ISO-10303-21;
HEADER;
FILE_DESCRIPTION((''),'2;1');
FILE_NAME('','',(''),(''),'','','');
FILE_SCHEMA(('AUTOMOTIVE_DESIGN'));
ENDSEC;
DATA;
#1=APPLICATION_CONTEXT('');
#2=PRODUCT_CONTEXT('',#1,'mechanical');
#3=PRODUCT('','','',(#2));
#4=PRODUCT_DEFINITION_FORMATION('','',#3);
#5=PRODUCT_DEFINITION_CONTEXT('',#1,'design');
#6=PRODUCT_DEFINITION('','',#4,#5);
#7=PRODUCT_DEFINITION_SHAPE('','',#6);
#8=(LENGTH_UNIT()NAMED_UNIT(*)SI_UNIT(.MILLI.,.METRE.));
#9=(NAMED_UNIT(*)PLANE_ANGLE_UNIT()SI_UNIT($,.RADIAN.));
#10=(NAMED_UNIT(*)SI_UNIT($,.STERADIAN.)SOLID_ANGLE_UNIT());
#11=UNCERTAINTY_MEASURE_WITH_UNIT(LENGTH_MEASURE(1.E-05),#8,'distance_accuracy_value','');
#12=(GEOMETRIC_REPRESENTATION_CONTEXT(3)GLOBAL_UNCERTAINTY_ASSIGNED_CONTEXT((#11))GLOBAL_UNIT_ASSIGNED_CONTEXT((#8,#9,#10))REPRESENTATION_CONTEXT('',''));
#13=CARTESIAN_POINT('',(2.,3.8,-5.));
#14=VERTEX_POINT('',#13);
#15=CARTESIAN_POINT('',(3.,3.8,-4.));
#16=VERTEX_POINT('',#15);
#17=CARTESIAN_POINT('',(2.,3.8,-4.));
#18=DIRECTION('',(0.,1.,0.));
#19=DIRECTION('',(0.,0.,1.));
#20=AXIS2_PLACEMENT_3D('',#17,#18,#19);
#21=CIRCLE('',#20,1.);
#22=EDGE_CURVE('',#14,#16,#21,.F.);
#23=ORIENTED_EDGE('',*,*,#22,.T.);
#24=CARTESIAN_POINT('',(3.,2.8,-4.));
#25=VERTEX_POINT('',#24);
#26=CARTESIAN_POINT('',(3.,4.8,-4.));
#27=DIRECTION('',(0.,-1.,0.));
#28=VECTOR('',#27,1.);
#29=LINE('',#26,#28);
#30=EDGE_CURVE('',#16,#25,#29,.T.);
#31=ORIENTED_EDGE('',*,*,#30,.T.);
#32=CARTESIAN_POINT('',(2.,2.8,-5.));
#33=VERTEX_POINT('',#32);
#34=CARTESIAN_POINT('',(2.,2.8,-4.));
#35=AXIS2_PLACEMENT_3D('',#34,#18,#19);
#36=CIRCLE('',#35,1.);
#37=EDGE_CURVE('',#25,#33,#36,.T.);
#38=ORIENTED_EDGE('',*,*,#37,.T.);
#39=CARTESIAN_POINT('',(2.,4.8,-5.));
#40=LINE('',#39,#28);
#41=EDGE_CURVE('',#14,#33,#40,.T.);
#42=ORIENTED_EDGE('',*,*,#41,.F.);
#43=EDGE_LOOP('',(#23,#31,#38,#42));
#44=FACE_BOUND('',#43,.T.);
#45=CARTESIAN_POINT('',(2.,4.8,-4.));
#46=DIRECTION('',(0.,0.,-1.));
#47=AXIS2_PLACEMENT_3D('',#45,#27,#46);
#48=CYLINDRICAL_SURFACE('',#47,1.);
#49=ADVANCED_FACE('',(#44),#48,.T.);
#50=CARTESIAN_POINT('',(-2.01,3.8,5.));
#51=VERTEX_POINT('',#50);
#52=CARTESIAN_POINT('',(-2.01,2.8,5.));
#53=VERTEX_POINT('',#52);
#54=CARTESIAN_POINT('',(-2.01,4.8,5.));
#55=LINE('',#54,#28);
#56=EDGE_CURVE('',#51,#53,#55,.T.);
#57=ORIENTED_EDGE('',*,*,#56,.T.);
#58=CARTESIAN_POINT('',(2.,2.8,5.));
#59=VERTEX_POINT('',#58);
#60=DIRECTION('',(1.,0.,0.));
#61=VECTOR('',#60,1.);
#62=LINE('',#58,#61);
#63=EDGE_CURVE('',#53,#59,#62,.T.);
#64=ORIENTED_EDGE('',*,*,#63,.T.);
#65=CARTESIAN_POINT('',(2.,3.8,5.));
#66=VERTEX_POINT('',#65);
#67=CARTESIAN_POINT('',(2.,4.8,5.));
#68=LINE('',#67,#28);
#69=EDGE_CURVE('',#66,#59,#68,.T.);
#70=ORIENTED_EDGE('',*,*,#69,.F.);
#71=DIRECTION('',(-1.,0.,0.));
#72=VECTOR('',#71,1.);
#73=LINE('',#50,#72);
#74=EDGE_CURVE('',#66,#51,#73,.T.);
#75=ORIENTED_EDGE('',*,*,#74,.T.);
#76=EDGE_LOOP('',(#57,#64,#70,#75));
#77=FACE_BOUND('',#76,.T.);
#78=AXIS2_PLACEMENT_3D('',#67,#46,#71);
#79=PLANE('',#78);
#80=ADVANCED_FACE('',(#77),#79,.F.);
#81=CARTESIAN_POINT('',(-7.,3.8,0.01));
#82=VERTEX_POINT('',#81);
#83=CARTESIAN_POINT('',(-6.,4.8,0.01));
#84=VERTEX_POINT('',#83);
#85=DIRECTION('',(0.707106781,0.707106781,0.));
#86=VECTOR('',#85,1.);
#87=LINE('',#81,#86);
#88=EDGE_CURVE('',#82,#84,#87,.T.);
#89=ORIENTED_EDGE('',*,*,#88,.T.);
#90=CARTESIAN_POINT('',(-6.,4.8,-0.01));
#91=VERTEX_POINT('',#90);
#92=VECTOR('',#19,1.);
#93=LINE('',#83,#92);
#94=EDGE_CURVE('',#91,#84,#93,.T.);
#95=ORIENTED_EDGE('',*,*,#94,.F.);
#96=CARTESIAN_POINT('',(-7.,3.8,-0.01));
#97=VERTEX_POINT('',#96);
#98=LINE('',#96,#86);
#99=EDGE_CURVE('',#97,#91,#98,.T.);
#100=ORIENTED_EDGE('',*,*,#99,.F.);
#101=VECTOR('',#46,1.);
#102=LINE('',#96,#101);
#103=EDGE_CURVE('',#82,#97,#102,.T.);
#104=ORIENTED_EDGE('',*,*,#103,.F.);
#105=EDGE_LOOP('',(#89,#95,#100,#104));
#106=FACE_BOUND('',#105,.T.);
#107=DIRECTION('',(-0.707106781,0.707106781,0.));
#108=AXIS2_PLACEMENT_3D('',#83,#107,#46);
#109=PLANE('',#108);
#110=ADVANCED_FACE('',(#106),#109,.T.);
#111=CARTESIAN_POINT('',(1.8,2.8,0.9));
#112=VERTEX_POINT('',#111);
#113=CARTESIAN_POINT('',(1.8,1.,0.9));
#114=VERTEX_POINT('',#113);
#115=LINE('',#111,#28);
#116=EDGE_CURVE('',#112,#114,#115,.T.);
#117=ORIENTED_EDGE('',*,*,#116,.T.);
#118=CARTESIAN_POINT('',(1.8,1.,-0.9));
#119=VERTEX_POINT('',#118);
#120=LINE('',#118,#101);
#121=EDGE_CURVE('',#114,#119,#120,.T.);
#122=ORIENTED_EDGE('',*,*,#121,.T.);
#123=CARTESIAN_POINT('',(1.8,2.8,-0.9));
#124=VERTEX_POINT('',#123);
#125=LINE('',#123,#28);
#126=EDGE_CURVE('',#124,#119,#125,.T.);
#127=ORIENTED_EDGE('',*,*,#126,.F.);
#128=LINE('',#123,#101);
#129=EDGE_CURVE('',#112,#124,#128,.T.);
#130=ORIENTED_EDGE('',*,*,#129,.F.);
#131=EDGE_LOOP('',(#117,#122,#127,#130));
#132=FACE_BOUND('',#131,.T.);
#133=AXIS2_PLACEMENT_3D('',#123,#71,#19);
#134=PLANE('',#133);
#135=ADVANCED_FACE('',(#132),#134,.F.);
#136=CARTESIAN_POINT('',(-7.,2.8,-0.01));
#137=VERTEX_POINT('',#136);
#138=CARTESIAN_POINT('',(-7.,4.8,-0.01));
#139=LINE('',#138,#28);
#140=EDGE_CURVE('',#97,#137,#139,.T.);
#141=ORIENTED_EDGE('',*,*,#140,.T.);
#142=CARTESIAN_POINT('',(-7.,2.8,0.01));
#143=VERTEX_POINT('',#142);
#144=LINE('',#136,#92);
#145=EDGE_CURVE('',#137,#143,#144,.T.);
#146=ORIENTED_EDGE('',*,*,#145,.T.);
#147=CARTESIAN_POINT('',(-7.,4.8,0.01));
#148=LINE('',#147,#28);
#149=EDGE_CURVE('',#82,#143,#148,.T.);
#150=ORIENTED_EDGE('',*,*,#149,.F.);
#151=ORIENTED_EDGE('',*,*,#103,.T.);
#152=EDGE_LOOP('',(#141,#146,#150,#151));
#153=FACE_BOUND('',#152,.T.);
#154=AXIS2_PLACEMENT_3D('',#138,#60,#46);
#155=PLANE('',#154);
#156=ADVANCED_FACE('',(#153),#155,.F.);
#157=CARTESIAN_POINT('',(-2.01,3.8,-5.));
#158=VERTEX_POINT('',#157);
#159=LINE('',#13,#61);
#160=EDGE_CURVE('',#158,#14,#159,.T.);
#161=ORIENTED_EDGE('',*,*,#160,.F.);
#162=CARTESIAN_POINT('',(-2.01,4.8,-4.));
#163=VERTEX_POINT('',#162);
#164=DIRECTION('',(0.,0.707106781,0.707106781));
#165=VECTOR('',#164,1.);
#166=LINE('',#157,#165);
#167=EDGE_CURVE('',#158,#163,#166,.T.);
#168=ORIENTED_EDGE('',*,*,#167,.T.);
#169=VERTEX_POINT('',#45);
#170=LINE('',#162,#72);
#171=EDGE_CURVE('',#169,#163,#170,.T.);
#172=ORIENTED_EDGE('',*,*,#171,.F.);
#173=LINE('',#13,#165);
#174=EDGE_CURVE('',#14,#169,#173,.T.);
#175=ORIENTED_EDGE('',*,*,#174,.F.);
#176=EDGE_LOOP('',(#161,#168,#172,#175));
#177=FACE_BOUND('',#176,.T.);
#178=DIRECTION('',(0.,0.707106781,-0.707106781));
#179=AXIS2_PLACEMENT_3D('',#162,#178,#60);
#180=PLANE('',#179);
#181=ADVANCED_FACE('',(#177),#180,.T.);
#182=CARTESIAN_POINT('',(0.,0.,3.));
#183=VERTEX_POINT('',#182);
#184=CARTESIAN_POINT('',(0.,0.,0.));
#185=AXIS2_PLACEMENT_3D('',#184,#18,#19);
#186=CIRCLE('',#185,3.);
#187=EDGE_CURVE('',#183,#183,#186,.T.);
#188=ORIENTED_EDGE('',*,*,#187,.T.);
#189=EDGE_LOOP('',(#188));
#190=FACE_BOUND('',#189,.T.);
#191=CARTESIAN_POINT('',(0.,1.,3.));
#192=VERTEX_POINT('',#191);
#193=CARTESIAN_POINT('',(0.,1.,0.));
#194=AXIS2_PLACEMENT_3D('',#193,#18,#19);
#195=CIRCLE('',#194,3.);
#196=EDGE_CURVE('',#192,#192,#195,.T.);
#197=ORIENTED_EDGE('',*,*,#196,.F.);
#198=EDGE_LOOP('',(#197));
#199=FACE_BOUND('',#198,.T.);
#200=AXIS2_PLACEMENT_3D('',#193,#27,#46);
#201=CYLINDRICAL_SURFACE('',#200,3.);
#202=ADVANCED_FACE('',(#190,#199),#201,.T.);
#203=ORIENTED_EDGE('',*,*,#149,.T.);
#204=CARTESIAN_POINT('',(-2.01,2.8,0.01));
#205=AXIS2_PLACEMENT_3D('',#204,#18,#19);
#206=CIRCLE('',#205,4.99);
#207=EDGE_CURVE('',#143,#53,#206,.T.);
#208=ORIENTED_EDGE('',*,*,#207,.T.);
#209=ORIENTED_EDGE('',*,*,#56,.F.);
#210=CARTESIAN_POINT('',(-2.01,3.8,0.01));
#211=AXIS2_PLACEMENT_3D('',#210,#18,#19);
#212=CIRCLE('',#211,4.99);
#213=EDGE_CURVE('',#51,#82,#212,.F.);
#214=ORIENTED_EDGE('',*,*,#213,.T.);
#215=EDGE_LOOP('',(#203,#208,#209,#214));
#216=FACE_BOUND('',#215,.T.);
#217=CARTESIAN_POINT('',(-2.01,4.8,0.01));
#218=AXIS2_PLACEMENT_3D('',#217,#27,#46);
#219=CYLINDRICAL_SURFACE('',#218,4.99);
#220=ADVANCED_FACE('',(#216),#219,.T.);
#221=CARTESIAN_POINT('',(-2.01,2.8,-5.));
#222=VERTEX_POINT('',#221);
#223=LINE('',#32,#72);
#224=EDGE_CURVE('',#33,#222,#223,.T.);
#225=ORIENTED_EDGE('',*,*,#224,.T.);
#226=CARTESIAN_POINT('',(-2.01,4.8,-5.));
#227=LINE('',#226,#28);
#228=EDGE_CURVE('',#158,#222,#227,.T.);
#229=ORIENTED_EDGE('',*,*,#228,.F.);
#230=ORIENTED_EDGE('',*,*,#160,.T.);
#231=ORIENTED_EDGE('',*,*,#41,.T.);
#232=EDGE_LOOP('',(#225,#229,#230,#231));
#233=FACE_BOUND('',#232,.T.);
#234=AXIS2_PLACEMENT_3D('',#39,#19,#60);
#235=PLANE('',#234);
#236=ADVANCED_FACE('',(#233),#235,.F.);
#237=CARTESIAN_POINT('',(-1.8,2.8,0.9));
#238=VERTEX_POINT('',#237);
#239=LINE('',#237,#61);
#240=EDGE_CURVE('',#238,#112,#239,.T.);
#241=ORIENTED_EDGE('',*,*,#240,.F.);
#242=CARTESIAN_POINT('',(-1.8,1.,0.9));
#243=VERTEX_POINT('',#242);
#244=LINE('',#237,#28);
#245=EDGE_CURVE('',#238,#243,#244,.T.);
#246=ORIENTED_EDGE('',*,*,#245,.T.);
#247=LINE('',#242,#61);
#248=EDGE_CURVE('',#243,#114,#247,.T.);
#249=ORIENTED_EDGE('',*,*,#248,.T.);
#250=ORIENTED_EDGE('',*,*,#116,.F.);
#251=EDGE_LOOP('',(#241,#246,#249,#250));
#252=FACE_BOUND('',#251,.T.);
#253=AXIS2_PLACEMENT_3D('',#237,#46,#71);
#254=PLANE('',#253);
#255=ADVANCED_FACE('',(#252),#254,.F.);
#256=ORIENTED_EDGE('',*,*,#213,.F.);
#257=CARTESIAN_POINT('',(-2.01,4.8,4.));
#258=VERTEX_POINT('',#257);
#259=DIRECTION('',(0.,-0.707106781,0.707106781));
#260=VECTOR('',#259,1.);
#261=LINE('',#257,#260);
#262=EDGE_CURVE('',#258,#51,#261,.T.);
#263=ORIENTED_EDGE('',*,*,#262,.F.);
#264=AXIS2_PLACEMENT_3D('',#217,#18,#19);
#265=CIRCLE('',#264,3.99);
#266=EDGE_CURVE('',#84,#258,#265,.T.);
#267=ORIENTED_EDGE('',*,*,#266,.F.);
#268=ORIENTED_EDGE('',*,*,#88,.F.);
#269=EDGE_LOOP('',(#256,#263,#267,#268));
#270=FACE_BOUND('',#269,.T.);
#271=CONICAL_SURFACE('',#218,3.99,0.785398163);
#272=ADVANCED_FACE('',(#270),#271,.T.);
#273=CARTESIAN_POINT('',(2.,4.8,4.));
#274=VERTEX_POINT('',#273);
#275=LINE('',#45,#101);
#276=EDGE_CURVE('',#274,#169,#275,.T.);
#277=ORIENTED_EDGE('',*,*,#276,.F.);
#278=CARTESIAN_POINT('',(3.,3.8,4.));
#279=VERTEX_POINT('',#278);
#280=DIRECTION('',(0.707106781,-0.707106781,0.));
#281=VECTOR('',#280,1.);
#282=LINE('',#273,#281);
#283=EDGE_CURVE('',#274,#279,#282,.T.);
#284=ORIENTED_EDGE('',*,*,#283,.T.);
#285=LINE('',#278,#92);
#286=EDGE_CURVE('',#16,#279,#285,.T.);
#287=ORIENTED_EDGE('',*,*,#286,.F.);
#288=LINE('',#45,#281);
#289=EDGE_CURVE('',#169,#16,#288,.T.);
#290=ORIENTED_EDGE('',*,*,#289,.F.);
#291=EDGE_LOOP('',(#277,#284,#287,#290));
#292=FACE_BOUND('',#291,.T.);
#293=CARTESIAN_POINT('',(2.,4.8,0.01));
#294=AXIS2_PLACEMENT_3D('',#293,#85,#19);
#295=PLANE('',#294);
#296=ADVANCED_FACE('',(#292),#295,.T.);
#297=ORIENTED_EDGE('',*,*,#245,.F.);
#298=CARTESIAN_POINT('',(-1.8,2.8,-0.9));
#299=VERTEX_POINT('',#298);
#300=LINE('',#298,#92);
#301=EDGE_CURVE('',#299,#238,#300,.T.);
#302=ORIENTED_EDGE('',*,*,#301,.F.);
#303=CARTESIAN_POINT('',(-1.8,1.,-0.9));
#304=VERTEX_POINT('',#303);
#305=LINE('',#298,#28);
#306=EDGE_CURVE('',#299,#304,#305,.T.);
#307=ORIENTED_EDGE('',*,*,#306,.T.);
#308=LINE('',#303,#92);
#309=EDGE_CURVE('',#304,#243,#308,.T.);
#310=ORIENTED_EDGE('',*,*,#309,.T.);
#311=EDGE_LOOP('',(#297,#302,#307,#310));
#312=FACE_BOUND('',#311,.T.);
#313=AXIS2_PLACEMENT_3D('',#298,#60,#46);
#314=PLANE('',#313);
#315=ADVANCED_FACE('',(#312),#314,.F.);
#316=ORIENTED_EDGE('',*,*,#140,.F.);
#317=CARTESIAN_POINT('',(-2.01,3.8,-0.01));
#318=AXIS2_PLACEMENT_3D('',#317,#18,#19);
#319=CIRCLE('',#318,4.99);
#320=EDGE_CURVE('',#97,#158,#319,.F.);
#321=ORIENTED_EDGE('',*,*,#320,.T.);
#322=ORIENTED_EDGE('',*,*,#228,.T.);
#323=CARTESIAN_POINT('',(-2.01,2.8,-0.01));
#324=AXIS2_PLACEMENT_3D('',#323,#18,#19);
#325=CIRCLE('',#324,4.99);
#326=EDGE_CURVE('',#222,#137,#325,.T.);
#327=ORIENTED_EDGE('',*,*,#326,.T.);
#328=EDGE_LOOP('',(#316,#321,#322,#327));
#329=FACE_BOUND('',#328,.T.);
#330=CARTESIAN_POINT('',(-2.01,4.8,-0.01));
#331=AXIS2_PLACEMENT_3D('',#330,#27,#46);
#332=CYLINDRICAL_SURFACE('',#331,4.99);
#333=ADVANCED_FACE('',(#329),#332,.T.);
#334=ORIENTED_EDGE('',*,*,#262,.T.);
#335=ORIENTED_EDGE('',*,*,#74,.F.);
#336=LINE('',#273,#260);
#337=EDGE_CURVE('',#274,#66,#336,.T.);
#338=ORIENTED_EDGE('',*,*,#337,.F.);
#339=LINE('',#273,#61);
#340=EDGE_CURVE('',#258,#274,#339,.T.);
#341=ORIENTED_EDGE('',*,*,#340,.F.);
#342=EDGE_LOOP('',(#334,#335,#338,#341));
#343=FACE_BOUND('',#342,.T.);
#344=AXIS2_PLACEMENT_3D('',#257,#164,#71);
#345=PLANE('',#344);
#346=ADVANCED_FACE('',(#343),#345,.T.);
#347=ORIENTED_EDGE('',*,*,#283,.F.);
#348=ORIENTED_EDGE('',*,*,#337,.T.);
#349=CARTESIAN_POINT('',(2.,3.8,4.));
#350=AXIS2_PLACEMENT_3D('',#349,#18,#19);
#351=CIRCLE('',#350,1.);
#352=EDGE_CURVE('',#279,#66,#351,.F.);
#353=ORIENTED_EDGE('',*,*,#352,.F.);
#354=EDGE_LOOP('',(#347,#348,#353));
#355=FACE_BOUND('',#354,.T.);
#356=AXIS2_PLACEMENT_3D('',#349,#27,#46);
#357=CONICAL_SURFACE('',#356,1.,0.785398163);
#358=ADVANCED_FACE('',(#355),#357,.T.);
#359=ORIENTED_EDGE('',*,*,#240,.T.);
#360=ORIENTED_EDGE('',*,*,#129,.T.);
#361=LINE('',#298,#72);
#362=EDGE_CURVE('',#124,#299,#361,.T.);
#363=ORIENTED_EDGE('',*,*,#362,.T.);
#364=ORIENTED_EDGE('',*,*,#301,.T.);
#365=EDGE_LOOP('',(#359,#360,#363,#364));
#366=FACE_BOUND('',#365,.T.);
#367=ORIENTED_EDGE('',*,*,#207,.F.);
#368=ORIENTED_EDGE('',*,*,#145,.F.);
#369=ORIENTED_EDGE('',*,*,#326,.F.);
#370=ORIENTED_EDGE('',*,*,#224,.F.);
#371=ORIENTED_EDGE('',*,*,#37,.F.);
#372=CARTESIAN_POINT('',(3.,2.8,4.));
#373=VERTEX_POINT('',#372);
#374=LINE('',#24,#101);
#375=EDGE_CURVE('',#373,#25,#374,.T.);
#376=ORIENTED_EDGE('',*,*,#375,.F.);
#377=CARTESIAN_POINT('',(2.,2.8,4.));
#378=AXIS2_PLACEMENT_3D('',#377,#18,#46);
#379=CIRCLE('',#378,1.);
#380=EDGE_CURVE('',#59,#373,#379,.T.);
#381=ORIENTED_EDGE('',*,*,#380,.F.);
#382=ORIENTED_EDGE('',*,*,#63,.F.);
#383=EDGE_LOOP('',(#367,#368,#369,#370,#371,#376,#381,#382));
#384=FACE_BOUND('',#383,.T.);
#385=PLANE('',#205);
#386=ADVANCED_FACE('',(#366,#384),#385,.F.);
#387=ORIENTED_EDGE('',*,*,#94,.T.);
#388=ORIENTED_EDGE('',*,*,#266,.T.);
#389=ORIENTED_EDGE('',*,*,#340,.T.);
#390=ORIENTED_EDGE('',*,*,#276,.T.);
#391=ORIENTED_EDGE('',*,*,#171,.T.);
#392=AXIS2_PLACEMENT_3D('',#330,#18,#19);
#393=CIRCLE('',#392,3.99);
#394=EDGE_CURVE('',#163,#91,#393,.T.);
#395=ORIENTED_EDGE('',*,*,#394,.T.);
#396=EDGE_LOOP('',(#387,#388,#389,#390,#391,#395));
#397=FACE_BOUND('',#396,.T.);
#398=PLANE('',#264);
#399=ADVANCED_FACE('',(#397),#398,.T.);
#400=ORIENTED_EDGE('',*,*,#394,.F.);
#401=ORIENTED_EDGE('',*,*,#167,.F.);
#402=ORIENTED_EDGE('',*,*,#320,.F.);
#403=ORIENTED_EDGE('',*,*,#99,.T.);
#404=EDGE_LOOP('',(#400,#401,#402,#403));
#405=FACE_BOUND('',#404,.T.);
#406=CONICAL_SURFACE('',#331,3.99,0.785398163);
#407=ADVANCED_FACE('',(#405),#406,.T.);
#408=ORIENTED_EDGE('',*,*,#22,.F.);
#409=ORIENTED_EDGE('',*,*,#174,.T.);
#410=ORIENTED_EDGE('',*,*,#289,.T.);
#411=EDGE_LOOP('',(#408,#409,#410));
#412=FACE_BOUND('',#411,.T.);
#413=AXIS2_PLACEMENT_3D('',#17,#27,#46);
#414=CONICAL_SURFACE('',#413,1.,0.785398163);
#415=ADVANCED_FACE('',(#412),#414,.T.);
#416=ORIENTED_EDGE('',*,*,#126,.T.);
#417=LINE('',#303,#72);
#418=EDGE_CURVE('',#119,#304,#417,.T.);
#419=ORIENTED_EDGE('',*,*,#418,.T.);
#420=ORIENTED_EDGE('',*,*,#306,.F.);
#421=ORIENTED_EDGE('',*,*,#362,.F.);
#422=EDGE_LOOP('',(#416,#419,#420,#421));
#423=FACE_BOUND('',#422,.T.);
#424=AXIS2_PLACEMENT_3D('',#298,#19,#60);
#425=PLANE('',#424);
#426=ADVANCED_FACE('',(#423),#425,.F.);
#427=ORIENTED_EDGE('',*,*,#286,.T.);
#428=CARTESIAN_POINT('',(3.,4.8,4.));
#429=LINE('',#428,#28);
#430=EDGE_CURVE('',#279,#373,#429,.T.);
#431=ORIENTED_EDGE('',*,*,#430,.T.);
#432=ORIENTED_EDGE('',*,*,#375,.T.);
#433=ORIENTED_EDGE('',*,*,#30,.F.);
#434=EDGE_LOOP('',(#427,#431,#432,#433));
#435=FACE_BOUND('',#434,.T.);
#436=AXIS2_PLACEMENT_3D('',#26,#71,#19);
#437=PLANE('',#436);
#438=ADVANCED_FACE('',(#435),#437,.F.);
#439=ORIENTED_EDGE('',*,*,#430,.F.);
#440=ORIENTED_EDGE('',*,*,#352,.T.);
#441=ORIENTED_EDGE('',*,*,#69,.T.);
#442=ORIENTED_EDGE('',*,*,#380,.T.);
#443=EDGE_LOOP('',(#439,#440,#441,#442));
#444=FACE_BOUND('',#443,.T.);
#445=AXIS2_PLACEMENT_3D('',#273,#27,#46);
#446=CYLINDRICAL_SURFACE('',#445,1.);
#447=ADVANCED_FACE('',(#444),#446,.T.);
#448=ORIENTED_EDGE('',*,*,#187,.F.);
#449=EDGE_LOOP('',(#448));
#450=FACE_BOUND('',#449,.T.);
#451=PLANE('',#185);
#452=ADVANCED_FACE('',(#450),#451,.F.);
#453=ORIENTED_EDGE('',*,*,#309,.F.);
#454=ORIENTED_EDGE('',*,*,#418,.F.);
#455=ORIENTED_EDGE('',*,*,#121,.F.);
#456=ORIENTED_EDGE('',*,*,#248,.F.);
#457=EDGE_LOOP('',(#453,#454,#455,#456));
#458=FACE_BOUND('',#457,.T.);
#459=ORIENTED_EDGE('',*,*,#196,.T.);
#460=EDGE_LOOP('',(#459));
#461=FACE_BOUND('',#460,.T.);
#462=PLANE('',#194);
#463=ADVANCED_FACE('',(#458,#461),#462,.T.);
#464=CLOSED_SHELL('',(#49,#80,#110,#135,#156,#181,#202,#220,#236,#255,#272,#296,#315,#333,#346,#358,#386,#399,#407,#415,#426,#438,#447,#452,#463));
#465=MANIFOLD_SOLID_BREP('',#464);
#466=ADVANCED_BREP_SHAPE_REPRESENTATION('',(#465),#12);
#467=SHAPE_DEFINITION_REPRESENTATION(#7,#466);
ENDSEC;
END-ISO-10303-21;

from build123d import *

# Parameters (mm, degrees)
SKETCH_1_R      = 3
EXTRUDE_1_DEPTH = 1
SKETCH_2_W      = 3.6
SKETCH_2_H      = 1.8
EXTRUDE_2_DEPTH = 1.8
EXTRUDE_3_DEPTH = 2
CHAMFER_1_SIZE  = 1


with BuildPart() as part:
    # 草图1 → 凸台-拉伸1 (new body)
    with BuildSketch(Plane(origin=(0, 0, 0), x_dir=(1, 0, 0), z_dir=(0, 1, 0))):
        with Locations(Location((0, 0, 0), (0, 0, 270))):
            Circle(SKETCH_1_R)
    extrude(amount=EXTRUDE_1_DEPTH)

    # 草图2 → 凸台-拉伸2 (add)
    with BuildSketch(Plane(origin=(0, 1, 0), x_dir=(1, 0, 0), z_dir=(0, 1, 0))):
        Rectangle(SKETCH_2_W, SKETCH_2_H)
    extrude(amount=EXTRUDE_2_DEPTH)

    # 草图3 → 凸台-拉伸3 (add)
    with BuildSketch(Plane(origin=(0, 2.8, 0), x_dir=(1, 0, 0), z_dir=(0, 1, 0))):
        with BuildLine():
            Line((2, 5), (-2.01, 5))
            ThreePointArc((-2.01, 5), (-5.538462838, 3.538462838), (-7, 0.01))
            Line((-7, 0.01), (-7, -0.01))
            ThreePointArc((-7, -0.01), (-5.538462838, -3.538462838), (-2.01, -5))
            Line((-2.01, -5), (2, -5))
            ThreePointArc((2, -5), (2.707106781, -4.707106781), (3, -4))
            Line((3, -4), (3, 4))
            ThreePointArc((3, 4), (2.707106781, 4.707106781), (2, 5))
        make_face()
    extrude(amount=EXTRUDE_3_DEPTH)

    # 倒角1
    chamfer_1_edges = [part.edges().sort_by_distance(p)[0] for p in [
        (-5.538462838, 4.8, 3.538462838),
        (-0.005, 4.8, 5),
        (2.707106781, 4.8, 4.707106781),
        (3, 4.8, 0),
        (2.707106781, 4.8, -4.707106781),
        (-0.005, 4.8, -5),
        (-5.538462838, 4.8, -3.538462838),
        (-7, 4.8, 0),
    ]]
    chamfer(chamfer_1_edges, length=CHAMFER_1_SIZE - 0.0001)  # a hair under: the kernel refuses the full size


solid = part.part
